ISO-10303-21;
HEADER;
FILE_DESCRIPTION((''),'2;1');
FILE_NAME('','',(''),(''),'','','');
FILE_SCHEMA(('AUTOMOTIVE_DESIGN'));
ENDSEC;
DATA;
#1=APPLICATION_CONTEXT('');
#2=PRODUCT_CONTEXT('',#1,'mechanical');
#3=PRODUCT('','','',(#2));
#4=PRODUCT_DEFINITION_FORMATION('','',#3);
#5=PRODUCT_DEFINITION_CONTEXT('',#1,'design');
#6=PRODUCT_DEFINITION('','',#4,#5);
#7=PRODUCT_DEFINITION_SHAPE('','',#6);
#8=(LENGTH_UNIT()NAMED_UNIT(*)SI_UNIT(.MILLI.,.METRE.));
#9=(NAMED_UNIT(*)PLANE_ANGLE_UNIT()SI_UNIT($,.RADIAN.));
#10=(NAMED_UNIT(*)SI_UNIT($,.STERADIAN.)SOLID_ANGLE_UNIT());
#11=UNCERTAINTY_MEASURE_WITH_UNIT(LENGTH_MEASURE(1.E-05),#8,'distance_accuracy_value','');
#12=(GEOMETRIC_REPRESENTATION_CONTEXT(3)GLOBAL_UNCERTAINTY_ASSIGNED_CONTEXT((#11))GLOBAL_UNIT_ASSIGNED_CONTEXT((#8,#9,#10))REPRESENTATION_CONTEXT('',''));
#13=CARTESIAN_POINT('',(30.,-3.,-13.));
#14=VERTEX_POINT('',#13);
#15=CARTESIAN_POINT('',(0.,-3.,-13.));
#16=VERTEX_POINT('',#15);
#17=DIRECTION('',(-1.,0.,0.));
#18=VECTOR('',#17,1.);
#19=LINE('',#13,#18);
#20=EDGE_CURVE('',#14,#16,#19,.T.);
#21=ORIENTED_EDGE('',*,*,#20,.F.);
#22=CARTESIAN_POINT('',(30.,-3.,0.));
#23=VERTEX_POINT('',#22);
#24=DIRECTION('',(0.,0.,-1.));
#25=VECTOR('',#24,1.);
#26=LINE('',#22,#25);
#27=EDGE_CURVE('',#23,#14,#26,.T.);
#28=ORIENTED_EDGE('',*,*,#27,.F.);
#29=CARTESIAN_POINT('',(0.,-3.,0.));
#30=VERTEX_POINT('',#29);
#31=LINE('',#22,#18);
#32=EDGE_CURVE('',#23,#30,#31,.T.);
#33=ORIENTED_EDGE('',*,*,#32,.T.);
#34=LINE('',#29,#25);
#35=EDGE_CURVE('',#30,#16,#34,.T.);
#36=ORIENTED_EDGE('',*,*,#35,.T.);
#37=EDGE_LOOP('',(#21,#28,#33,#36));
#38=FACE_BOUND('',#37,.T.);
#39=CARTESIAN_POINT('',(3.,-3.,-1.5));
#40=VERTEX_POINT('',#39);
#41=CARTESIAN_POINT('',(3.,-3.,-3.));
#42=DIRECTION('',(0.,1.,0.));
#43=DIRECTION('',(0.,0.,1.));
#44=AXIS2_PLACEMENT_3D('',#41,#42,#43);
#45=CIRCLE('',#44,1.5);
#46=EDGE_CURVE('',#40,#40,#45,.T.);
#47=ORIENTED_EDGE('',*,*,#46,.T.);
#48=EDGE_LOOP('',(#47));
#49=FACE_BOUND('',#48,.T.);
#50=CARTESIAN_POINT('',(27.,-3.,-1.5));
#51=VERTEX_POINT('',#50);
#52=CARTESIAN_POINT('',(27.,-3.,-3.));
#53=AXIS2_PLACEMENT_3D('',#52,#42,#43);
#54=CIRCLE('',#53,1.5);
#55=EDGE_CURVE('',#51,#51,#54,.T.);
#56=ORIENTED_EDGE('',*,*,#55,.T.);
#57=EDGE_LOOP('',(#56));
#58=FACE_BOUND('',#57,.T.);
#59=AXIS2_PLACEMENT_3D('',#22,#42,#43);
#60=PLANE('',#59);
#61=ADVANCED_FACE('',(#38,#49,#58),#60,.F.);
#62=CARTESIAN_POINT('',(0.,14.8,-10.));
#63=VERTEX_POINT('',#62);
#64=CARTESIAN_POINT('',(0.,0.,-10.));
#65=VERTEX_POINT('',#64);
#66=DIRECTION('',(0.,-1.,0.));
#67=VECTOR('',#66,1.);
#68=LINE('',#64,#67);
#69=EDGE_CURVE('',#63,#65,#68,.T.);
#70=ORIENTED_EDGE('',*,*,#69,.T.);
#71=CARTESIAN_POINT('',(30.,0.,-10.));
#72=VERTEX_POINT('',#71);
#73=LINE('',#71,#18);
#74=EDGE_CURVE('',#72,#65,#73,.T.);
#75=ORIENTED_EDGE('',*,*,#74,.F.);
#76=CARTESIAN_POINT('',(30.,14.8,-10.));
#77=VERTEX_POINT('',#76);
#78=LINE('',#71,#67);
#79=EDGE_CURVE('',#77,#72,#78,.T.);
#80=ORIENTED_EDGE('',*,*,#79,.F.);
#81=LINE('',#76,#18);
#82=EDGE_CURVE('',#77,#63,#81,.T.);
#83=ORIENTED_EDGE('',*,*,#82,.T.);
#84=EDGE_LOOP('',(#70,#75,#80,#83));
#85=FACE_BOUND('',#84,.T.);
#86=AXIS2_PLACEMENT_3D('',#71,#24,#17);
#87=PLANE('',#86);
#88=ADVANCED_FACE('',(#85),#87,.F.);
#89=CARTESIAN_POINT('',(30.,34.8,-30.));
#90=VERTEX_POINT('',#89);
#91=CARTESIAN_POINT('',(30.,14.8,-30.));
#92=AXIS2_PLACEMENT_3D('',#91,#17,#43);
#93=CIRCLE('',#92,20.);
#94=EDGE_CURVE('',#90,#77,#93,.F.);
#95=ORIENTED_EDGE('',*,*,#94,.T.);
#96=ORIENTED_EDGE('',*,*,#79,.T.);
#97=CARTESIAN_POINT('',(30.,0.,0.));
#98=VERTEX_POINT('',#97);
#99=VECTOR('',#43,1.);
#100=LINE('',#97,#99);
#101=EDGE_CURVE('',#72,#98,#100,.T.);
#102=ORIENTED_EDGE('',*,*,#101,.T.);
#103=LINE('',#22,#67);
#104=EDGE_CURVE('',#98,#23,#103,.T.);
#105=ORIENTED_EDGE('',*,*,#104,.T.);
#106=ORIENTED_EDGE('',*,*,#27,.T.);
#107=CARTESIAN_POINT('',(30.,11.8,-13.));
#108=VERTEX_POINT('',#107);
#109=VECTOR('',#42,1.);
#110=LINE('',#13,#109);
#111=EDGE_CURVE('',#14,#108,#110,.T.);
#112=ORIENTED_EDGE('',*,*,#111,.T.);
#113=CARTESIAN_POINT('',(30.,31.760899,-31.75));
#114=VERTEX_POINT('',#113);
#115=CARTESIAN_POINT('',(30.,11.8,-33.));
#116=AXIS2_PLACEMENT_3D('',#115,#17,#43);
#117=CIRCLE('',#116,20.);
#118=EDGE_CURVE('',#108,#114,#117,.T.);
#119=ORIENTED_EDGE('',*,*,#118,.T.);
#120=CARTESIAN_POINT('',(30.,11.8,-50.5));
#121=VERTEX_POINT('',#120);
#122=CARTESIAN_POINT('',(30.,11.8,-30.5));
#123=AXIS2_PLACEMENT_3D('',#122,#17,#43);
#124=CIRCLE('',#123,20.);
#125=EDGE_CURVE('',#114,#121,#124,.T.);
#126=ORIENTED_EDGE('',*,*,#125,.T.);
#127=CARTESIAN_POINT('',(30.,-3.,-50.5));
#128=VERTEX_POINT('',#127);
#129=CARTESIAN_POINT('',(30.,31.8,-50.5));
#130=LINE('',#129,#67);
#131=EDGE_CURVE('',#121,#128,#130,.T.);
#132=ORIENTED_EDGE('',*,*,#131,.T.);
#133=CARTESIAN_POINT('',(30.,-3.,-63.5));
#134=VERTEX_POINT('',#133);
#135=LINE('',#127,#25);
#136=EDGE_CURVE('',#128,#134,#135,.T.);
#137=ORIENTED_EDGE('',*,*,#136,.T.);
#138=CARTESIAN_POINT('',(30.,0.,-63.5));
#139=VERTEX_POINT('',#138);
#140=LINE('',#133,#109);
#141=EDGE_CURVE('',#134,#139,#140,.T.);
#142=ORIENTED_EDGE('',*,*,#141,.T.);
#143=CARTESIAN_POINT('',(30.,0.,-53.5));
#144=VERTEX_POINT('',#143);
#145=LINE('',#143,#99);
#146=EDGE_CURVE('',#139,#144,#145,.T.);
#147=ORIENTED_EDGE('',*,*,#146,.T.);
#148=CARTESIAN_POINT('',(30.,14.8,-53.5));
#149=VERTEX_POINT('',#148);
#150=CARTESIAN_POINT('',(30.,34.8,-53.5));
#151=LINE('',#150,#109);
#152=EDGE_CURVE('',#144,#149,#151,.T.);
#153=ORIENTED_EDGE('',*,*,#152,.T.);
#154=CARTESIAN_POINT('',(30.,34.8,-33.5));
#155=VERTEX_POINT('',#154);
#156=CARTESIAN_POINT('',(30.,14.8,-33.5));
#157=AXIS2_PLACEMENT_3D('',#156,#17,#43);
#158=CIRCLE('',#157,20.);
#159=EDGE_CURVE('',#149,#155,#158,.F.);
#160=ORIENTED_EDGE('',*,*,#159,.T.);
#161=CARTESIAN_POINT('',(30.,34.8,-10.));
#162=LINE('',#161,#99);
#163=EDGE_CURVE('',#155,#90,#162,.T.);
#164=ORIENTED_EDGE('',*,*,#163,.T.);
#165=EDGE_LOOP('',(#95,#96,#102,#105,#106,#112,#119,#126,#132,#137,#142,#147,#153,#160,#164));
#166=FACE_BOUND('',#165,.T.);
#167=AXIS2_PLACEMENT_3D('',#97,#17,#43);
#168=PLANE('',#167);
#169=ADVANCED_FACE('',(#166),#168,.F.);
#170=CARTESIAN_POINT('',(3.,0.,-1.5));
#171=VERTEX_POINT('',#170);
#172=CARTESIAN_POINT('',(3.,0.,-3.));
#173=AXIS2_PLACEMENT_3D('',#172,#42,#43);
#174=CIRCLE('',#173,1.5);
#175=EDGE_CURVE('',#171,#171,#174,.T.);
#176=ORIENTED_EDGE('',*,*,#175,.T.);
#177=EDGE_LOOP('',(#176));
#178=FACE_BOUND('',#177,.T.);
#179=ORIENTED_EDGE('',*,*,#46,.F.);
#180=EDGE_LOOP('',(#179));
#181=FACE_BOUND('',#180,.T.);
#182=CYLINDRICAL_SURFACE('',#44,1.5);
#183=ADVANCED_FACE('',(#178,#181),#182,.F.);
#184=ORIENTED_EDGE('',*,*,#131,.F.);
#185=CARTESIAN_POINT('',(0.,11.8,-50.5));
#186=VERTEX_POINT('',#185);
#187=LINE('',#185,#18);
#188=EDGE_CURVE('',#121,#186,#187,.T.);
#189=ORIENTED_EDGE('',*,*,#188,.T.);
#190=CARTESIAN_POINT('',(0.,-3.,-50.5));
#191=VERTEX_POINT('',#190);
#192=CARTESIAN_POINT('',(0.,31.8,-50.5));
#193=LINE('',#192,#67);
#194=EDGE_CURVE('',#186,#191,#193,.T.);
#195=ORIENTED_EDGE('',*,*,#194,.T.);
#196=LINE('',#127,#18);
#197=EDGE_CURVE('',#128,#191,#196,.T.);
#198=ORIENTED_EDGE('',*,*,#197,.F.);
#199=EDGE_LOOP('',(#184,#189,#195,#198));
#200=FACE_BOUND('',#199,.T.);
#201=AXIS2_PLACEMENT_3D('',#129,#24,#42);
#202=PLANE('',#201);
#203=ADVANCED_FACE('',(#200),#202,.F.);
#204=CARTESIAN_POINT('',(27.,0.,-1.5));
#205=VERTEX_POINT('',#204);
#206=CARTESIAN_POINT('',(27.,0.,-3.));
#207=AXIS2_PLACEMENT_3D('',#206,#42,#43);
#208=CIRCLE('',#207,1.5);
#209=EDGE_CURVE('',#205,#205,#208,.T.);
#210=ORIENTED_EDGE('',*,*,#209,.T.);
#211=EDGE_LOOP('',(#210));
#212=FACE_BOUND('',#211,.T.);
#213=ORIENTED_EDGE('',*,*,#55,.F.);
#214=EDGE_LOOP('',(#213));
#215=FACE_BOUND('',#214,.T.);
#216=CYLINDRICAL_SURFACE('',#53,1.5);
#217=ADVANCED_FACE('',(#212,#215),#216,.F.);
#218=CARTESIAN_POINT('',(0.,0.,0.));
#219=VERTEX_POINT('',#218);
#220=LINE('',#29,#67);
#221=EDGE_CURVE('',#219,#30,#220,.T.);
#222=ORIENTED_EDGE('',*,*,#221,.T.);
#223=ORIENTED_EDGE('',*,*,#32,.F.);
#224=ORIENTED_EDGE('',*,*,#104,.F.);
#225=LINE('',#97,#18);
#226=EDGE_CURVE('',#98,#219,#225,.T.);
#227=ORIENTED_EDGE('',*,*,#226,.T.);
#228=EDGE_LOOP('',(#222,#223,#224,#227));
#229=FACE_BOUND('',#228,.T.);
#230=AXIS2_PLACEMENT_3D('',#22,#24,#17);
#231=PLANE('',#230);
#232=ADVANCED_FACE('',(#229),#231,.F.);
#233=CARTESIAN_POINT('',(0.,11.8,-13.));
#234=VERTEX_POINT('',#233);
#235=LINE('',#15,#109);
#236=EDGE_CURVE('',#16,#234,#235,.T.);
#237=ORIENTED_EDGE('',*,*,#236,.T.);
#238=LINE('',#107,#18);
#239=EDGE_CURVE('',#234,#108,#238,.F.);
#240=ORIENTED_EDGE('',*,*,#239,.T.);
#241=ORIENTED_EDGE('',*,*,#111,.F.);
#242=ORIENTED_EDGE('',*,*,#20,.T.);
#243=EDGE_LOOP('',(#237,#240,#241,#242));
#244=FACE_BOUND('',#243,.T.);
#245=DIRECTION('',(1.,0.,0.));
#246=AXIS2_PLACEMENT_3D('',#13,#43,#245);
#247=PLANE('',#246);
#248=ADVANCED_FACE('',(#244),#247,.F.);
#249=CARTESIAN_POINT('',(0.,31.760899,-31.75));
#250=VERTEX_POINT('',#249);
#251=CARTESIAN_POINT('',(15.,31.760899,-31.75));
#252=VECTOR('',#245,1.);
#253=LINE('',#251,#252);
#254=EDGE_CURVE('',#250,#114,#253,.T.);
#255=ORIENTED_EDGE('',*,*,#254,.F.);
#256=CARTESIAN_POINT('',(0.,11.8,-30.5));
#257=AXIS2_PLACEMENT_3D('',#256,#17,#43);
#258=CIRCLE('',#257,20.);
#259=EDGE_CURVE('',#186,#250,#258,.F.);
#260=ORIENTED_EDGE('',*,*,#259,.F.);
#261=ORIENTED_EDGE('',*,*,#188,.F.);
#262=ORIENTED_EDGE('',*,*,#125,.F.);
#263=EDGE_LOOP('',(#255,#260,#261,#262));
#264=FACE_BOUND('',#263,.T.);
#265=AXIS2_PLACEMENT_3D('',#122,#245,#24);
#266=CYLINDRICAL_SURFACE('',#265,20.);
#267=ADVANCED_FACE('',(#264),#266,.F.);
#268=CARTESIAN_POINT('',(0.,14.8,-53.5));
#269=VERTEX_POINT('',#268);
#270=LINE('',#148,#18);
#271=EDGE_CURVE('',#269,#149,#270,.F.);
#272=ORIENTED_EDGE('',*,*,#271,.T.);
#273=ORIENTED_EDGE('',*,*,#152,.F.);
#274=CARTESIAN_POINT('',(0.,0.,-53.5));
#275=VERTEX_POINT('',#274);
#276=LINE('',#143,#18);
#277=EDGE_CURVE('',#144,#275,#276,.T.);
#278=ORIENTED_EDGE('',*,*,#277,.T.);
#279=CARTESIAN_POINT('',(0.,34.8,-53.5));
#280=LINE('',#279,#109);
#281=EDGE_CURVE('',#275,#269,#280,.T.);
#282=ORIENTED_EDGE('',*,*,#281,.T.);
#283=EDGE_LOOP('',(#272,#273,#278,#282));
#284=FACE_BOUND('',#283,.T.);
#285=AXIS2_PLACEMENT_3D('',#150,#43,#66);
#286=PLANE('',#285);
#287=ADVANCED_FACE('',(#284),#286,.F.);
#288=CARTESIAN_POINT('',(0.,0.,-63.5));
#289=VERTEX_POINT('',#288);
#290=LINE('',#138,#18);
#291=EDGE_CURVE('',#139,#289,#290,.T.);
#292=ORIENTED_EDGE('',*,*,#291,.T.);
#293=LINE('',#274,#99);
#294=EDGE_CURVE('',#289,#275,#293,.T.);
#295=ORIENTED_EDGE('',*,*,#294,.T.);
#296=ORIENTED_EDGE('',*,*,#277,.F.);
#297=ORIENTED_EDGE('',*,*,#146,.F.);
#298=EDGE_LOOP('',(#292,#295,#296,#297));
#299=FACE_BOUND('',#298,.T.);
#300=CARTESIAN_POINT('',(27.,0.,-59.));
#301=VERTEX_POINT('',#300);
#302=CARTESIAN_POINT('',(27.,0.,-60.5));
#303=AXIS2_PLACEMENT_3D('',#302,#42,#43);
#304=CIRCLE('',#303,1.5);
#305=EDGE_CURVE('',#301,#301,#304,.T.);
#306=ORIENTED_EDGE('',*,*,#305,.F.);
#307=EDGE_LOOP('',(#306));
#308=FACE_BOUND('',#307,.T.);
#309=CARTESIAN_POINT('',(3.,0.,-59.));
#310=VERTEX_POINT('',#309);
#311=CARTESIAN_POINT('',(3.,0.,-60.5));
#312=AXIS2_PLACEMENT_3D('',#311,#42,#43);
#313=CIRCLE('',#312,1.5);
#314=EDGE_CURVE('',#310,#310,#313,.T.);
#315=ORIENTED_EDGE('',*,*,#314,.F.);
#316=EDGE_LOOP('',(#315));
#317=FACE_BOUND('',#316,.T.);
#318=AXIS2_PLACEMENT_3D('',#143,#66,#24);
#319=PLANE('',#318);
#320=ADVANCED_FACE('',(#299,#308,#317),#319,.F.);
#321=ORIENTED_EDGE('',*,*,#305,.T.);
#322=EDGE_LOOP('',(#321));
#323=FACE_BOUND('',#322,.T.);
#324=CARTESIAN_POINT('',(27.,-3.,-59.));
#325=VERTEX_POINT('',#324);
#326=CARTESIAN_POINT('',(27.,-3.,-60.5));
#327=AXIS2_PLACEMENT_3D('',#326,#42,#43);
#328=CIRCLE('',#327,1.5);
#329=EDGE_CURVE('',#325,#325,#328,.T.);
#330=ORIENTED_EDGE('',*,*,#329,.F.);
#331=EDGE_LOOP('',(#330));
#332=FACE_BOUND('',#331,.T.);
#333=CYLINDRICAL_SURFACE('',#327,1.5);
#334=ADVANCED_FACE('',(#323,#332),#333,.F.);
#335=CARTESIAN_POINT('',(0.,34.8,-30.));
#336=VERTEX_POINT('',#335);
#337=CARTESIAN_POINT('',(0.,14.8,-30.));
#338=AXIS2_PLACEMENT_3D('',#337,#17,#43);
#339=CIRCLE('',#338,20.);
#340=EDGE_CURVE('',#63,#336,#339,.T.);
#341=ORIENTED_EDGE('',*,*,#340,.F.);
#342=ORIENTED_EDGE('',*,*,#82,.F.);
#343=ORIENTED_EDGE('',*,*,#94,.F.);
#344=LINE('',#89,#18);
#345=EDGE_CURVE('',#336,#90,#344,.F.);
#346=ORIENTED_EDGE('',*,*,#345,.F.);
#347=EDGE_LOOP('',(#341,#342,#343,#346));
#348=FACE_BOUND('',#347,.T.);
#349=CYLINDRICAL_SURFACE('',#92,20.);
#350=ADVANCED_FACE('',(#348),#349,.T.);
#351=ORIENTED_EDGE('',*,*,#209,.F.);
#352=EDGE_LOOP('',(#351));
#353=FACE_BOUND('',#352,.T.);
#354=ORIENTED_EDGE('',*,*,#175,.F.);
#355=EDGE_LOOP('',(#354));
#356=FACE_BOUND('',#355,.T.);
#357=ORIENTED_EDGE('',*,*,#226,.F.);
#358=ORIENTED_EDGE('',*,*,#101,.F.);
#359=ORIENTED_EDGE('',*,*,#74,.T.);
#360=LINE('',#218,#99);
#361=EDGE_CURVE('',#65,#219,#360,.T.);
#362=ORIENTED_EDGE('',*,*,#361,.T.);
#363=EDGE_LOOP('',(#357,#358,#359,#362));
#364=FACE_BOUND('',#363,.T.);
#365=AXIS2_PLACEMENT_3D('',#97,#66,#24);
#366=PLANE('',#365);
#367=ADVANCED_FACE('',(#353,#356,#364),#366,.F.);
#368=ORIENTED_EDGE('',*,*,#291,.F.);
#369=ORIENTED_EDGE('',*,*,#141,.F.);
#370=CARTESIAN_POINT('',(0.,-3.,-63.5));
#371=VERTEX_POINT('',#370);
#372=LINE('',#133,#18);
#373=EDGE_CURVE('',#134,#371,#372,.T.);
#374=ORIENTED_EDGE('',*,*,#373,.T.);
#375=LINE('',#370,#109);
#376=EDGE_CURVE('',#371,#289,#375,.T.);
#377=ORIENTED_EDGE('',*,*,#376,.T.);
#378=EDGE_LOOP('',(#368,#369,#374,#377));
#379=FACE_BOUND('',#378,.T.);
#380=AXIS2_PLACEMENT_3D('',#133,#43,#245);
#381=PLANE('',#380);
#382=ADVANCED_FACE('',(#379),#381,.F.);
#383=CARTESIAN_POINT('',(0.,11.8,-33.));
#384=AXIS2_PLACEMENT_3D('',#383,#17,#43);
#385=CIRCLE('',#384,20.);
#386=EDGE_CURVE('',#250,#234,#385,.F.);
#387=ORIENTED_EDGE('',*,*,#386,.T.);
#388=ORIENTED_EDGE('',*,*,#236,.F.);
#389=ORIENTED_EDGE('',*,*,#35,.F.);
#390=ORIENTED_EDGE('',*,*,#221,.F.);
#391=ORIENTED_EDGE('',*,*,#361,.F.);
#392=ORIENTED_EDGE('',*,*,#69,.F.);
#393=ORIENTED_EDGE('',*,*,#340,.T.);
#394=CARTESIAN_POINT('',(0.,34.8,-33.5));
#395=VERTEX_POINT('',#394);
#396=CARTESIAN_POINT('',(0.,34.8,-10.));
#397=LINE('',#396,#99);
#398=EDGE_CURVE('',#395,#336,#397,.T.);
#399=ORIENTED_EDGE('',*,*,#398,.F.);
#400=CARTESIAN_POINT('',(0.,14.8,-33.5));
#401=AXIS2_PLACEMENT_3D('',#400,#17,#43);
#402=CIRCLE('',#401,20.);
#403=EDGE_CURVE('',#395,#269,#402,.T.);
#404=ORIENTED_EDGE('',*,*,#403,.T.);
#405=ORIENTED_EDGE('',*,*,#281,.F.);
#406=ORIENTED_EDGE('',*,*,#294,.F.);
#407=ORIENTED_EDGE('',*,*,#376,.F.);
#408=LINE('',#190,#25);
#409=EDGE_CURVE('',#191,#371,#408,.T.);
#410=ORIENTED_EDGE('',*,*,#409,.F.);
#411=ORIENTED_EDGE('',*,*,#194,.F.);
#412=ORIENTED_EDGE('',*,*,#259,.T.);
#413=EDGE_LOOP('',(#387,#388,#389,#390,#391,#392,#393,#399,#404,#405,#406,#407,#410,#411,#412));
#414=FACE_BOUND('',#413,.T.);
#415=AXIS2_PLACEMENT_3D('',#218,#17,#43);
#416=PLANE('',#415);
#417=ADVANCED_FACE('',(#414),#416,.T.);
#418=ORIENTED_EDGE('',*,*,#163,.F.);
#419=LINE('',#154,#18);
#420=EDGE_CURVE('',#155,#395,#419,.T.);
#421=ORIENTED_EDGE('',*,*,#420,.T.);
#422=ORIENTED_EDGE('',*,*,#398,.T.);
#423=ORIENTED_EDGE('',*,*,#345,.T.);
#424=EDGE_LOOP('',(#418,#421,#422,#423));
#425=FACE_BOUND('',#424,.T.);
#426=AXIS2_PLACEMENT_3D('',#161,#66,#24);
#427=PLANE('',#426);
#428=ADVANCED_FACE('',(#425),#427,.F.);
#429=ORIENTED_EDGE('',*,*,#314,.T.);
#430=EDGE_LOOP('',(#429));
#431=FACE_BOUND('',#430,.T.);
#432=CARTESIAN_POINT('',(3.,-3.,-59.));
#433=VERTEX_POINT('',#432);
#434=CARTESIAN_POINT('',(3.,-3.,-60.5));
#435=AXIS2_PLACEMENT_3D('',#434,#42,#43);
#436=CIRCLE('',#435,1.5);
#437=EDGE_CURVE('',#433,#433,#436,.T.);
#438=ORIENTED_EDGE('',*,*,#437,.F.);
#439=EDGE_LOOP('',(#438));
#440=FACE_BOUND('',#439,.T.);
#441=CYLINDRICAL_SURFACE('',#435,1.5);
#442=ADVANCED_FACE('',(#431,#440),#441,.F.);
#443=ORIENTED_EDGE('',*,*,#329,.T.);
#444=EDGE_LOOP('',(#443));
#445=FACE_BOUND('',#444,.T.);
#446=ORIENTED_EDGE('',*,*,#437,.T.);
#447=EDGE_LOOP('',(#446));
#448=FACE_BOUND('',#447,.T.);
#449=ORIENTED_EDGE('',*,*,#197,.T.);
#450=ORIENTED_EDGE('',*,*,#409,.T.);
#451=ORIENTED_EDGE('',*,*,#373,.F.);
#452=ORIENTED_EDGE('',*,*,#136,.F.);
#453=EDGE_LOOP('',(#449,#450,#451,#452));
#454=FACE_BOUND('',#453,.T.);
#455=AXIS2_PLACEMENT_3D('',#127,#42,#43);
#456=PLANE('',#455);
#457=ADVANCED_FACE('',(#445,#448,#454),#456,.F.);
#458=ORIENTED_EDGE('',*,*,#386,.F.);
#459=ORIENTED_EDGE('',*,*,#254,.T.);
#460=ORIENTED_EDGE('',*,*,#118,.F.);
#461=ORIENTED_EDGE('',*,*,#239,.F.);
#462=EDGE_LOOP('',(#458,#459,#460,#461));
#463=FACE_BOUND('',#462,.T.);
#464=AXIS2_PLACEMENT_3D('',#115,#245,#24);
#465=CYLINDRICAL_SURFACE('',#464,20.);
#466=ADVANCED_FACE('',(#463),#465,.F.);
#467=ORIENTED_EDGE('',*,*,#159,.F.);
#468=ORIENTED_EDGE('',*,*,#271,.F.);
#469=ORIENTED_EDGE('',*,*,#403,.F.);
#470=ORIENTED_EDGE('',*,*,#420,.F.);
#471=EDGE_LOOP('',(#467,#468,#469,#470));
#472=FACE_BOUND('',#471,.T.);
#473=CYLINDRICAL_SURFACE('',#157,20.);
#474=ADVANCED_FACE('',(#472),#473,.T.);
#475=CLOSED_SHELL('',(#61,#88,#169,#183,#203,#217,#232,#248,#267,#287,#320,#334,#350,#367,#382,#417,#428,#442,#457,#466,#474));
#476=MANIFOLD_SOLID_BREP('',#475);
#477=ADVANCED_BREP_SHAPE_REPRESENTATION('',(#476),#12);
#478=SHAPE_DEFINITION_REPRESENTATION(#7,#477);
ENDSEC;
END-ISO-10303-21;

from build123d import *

# Parameters (mm, degrees)
BOSS_EXTRUDE2_DEPTH = 30
FILLET1_R           = 20
SKETCH7_R           = 1.5
CUT_EXTRUDE2_DEPTH  = 79.379142634


with BuildPart() as part:
    # Sketch6 → Boss-Extrude2 (new body)
    with BuildSketch(Plane(origin=(0, 0, 0), x_dir=(0, 0, -1), z_dir=(1, 0, 0))):
        Polygon((0, 0), (10, 0), (10, 34.8), (53.5, 34.8), (53.5, 0), (63.5, 0), (63.5, -3), (50.5, -3), (50.5, 31.8), (13, 31.8), (13, -3), (0, -3), align=None)
    extrude(amount=BOSS_EXTRUDE2_DEPTH)

    # Fillet1
    # the kernel refuses this fillet: 20 mm, written as the material it adds along each edge
    with BuildSketch(Plane(origin=(0, 31.8, -13), x_dir=(0, 0, -1), z_dir=(1, 0, 0)), Plane(origin=(0, 31.8, -50.5), x_dir=(0, -1, 0), z_dir=(1, 0, 0))) as fillet1_piece_1:
        with BuildLine():
            CenterArc((FILLET1_R, -FILLET1_R), FILLET1_R, 90, 90)
            Line((0, -FILLET1_R), (0, 0))
            Line((0, 0), (FILLET1_R, 0))
        make_face()
    extrude(amount=30)
    # the kernel refuses this fillet: 20 mm, written as the material it takes off along each edge
    with BuildSketch(Plane(origin=(-50, 34.8, -10), x_dir=(0, -1, 0), z_dir=(1, 0, 0)), Plane(origin=(-50, 34.8, -53.5), x_dir=(0, 0, 1), z_dir=(1, 0, 0))) as fillet1_2_piece_1:
        with BuildLine():
            CenterArc((FILLET1_R, FILLET1_R), FILLET1_R, 180, 90)
            Line((0, FILLET1_R), (0, 0))
            Line((0, 0), (FILLET1_R, 0))
        make_face()
    extrude(amount=130, mode=Mode.SUBTRACT)

    # Sketch7 → Cut-Extrude2 (cut, through all)
    with BuildSketch(Plane(origin=(0, 0, 0), x_dir=(1, 0, 0), z_dir=(0, 1, 0))):
        with Locations(Location((27, 60.5, 0), (0, 0, 270))):
            Circle(SKETCH7_R)
        with Locations(Location((3, 60.5, 0), (0, 0, 270))):
            Circle(SKETCH7_R)
        with Locations(Location((3, 3, 0), (0, 0, 270))):
            Circle(SKETCH7_R)
        with Locations(Location((27, 3, 0), (0, 0, 270))):
            Circle(SKETCH7_R)
    extrude(amount=-CUT_EXTRUDE2_DEPTH, mode=Mode.SUBTRACT)


solid = part.part
